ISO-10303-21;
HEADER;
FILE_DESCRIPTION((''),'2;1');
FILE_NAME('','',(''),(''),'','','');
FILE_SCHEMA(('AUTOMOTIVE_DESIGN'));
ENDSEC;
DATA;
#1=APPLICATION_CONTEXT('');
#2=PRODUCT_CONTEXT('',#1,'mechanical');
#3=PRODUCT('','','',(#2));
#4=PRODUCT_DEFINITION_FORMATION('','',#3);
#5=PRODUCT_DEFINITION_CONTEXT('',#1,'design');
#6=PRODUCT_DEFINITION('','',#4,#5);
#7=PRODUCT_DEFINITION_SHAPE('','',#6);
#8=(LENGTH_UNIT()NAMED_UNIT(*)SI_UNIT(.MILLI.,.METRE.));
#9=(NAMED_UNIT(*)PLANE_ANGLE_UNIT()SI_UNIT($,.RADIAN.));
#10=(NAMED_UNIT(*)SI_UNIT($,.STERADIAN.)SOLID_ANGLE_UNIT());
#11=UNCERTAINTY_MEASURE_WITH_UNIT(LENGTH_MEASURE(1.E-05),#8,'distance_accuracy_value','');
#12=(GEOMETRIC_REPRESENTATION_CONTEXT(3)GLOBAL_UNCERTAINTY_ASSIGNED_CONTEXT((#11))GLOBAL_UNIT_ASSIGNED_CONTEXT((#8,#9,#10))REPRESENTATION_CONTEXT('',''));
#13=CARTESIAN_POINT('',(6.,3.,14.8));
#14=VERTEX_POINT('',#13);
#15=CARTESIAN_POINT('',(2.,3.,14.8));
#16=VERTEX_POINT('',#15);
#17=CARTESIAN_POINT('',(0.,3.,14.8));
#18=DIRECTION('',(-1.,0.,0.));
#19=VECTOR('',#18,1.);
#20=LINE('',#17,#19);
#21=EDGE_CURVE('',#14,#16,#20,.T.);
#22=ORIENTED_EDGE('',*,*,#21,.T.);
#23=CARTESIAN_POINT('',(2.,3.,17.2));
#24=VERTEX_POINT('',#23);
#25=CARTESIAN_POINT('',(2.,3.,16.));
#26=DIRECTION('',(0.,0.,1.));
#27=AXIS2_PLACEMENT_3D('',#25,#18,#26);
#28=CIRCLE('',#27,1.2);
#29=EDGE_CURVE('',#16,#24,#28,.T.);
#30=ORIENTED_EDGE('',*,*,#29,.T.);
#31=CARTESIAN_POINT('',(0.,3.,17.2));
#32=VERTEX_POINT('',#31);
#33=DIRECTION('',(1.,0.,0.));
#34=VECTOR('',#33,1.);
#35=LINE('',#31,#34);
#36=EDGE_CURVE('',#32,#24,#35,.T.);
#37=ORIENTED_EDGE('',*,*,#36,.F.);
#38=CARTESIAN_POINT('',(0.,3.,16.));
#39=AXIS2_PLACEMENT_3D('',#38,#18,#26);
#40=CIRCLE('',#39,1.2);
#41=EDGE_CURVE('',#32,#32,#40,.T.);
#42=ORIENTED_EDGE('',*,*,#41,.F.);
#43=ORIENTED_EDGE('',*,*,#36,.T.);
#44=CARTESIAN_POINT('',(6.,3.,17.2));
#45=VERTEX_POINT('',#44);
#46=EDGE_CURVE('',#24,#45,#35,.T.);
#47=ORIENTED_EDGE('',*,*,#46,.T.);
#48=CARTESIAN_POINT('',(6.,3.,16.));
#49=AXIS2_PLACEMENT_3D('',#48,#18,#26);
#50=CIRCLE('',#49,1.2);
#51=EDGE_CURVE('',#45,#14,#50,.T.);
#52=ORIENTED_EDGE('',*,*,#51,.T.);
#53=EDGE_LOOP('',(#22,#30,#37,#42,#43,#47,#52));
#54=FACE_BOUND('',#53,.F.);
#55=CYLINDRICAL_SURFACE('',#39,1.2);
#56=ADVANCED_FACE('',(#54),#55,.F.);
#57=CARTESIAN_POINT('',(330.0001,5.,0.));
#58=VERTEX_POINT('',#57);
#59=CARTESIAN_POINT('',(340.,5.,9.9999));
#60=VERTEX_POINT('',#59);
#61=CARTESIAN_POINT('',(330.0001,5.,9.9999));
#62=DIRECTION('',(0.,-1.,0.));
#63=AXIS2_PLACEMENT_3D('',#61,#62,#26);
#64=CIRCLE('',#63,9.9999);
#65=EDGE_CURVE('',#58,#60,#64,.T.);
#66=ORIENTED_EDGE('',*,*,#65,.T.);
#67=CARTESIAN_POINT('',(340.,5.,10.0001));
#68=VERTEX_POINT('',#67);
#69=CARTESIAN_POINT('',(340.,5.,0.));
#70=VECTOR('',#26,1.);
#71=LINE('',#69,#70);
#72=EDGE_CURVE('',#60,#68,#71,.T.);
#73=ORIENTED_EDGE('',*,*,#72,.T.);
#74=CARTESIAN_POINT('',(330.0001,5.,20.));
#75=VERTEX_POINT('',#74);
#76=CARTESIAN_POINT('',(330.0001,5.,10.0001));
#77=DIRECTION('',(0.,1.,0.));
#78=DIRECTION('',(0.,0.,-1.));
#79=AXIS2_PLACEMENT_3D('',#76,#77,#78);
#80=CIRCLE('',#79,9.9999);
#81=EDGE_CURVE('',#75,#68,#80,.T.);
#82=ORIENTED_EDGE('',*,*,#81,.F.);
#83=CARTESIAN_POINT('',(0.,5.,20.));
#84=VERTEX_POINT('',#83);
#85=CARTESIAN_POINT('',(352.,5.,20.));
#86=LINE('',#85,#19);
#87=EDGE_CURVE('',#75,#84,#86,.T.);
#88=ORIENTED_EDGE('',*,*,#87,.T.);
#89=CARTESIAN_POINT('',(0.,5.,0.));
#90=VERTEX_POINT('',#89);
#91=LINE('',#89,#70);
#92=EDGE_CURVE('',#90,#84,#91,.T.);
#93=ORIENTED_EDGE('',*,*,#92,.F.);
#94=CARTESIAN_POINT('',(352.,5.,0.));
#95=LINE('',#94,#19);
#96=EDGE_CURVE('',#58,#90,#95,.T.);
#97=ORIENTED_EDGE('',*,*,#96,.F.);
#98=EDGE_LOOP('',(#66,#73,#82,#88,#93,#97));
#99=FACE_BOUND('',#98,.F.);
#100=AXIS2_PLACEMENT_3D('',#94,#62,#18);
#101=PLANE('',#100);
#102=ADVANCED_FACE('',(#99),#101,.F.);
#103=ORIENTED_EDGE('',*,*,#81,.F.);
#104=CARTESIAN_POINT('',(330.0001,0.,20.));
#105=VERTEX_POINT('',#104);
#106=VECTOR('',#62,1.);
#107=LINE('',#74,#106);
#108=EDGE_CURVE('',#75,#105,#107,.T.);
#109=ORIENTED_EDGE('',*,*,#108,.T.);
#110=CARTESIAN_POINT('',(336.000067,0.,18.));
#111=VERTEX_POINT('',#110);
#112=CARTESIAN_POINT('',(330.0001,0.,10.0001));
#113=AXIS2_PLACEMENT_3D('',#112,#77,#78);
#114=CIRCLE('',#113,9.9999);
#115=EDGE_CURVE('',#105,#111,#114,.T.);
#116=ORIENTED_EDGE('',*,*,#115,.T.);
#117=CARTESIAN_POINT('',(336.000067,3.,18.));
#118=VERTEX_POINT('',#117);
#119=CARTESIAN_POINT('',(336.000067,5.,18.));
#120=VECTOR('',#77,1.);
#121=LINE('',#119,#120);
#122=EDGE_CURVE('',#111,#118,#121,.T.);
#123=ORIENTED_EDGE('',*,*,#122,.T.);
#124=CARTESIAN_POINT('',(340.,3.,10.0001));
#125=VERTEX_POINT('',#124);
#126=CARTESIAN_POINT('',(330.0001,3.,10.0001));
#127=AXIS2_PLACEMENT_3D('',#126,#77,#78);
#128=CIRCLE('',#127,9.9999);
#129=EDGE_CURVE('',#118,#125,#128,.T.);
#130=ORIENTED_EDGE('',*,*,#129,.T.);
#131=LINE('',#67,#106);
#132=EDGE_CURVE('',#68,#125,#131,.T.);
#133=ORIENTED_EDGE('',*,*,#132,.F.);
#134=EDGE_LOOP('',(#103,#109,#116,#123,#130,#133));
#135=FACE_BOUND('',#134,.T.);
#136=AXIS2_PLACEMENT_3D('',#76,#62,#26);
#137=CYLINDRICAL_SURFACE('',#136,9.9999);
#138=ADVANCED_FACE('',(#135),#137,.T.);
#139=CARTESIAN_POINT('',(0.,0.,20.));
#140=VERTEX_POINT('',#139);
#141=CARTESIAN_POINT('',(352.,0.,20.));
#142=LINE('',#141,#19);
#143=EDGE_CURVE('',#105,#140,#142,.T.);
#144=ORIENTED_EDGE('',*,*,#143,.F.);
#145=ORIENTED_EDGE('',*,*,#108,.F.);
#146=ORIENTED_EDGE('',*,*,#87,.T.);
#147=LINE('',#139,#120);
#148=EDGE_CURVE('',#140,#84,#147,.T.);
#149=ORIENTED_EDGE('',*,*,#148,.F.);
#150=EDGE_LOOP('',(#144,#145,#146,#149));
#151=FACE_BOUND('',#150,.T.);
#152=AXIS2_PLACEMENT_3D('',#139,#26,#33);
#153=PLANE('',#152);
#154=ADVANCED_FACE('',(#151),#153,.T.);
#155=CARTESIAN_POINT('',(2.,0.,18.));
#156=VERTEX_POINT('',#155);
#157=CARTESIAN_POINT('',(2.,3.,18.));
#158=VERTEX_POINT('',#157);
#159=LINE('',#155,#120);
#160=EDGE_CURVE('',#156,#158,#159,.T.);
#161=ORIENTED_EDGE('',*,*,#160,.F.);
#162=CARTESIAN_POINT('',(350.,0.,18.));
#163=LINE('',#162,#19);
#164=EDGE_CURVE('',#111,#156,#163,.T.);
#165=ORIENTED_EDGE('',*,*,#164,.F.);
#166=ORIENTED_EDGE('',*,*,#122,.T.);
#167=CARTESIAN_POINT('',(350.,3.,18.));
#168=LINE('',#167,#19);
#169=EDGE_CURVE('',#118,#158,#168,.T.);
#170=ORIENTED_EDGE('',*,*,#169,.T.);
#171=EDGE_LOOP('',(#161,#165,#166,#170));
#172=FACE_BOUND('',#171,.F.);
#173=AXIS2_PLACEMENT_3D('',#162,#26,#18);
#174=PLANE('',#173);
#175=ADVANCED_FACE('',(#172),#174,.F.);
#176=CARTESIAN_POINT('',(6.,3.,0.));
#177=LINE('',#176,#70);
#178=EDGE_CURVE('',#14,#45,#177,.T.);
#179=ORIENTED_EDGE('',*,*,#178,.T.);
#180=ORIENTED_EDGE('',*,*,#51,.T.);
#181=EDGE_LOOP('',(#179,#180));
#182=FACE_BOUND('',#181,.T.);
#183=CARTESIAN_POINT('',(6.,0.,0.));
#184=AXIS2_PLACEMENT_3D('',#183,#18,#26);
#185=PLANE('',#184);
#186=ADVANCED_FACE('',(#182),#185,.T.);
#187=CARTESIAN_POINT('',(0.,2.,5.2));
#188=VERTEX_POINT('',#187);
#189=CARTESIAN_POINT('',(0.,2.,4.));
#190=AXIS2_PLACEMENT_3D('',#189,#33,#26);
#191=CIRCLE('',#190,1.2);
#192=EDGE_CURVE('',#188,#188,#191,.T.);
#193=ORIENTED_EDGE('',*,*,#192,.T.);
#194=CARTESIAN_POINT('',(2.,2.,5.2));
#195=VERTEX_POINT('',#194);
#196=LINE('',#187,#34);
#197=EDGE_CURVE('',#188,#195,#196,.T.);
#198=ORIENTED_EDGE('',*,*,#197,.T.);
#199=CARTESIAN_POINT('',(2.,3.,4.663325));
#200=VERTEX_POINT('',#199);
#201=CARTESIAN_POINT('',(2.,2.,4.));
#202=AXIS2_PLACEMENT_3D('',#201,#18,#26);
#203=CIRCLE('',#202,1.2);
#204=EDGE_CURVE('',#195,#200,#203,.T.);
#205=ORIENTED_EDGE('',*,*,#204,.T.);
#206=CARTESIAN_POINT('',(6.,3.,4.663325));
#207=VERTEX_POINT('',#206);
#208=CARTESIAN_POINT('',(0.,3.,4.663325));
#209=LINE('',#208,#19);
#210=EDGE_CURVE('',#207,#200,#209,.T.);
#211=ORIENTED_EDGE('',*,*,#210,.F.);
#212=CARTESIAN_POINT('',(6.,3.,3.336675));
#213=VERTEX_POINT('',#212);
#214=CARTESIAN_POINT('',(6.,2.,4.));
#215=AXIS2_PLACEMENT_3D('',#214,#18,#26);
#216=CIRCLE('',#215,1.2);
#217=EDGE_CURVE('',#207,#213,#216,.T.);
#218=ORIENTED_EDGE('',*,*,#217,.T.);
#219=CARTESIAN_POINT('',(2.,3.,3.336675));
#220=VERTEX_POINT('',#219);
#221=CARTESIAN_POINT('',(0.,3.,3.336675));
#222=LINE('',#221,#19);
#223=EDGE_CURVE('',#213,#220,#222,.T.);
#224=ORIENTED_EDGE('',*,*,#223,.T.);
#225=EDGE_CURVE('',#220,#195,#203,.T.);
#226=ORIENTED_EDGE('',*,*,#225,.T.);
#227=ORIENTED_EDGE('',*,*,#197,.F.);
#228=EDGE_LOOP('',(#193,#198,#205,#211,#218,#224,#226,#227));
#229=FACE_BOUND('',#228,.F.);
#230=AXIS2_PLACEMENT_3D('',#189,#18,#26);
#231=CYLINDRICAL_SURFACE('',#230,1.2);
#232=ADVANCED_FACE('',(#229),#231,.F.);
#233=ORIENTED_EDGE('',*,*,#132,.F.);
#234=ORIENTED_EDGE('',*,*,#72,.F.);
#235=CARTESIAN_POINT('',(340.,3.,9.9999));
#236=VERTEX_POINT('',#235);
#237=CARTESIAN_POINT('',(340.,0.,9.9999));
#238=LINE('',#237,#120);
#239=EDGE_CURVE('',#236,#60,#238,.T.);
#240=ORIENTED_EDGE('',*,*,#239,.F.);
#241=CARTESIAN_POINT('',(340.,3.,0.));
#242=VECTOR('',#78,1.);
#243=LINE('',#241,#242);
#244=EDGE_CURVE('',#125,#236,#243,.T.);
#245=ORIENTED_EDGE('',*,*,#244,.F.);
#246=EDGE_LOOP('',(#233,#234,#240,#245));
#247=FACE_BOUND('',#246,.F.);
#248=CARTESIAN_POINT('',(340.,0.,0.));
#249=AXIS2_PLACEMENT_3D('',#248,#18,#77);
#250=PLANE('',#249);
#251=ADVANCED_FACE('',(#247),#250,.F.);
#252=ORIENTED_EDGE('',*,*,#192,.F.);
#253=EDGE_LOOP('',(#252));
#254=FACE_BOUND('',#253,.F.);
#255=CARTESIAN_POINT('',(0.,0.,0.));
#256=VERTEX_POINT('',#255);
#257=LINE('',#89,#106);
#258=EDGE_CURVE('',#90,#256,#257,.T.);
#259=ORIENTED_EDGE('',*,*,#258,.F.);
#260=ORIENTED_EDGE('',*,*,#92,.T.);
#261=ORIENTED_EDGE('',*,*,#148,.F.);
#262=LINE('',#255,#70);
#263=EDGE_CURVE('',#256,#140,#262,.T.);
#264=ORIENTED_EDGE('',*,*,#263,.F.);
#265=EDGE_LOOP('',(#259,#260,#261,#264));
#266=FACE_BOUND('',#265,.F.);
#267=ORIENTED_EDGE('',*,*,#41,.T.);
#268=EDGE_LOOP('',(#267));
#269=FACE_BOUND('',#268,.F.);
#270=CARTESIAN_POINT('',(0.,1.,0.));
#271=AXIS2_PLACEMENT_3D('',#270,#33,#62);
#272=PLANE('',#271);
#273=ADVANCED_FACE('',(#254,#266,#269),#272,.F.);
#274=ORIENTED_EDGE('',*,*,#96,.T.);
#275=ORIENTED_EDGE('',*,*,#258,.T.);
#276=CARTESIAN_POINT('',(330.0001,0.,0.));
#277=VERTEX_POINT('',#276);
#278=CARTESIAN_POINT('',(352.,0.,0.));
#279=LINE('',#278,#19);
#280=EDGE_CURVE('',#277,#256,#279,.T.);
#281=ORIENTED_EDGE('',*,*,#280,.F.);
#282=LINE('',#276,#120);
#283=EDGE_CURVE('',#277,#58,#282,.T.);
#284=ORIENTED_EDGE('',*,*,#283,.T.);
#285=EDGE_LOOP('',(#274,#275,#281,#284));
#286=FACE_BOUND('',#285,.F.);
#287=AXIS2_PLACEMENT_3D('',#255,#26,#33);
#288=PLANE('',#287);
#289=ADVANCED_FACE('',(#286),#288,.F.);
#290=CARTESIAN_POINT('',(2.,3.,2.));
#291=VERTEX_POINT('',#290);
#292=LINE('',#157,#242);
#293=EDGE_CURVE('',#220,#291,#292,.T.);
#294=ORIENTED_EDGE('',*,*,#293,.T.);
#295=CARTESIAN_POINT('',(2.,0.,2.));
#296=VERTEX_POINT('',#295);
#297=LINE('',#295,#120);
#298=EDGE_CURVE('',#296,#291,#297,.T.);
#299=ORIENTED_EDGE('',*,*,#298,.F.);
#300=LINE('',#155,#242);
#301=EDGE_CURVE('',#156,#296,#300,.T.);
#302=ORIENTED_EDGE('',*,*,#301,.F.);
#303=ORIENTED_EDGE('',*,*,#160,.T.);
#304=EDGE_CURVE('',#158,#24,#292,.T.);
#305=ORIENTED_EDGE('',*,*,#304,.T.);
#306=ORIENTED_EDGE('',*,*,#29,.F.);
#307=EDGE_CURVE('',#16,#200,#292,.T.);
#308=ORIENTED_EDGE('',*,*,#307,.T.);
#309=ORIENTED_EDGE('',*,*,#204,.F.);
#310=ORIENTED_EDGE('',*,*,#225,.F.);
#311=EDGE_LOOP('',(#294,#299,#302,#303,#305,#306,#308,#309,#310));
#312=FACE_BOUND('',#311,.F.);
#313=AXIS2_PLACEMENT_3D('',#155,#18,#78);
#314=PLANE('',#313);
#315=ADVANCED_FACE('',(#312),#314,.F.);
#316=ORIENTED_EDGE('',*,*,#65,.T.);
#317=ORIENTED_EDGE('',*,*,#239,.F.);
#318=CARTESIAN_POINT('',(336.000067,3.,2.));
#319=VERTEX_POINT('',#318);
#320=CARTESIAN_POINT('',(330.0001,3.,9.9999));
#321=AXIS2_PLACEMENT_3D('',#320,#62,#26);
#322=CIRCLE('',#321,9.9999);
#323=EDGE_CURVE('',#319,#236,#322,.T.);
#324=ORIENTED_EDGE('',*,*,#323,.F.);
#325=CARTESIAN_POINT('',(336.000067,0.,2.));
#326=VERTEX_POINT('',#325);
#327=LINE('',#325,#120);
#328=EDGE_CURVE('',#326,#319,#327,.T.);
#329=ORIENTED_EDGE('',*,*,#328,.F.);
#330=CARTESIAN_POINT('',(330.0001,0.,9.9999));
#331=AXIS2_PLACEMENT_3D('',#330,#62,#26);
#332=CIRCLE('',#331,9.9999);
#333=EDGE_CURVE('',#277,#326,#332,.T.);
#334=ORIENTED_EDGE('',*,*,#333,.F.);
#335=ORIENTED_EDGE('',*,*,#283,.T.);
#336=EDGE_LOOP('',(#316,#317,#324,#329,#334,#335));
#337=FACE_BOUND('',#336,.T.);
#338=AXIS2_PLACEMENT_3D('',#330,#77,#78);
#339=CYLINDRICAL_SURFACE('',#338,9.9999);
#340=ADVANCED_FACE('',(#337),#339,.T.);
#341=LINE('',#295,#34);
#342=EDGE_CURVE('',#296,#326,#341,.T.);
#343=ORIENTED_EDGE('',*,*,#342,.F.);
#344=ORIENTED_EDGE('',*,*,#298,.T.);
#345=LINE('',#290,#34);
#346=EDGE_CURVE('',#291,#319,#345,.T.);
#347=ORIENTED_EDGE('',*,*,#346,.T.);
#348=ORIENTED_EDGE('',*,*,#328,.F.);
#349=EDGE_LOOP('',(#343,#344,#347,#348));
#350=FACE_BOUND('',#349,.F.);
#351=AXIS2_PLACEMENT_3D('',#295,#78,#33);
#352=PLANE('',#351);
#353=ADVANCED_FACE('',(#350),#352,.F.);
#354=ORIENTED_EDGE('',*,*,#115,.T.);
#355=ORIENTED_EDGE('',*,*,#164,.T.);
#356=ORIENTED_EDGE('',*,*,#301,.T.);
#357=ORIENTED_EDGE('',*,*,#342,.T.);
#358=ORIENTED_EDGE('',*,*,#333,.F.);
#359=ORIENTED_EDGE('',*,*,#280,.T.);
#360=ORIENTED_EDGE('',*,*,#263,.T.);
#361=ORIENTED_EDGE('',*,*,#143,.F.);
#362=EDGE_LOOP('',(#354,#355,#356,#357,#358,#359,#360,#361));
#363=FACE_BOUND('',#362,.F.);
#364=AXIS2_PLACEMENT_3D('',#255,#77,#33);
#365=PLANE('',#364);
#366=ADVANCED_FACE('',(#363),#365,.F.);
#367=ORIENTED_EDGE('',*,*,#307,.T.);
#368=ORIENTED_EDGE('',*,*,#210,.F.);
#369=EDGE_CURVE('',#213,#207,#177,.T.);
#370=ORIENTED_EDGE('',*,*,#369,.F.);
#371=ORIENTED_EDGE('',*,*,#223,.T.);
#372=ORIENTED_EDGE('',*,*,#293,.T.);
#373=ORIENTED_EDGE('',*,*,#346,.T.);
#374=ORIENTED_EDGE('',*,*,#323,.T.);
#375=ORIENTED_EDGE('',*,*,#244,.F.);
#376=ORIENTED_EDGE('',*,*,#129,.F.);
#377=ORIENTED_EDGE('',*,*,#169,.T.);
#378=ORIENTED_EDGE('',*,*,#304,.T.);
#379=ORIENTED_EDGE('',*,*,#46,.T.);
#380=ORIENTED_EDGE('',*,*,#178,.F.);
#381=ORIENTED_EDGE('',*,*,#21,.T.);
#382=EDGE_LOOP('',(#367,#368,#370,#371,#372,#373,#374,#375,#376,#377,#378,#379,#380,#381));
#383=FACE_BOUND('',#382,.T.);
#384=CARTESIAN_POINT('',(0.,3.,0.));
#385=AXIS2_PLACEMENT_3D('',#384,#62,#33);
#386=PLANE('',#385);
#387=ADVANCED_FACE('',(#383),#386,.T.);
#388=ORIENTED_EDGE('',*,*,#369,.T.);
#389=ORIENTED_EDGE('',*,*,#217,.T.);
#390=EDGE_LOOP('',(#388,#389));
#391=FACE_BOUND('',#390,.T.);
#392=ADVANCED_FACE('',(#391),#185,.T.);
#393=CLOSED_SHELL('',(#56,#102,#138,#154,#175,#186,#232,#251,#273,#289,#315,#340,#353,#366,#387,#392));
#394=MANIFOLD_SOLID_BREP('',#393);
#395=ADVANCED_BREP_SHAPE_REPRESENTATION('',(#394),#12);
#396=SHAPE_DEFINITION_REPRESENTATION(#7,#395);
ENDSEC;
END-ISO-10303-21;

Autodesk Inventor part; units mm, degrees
ref_plane "YZ Plane" through (0, 0, 0) normal (1, 0, 0) x (0, 1, 0)
ref_plane "XZ Plane" through (0, 0, 0) normal (0, 1, 0) x (-1, 0, 0)
ref_plane "XY Plane" through (0, 0, 0) normal (0, 0, 1) x (1, 0, 0)
sketch "スケッチ1" plane through (0, 0, 0) normal (0, 0, 1) x (1, 0, 0)
  line L0 (0, 0) -> (352, 0)
  line L1 (352, 0) -> (352, 5)
  line L2 (352, 5) -> (0, 5)
  line L3 (0, 5) -> (0, 0)
  line L4 (0, 0) -> (6, 0)
  line L5 (0, 1) -> (0, 0)
  dimension "d0" = 352
  dimension "d1" = 5
extrude "押し出し1" add sketch "スケッチ1" along normal blind 20
sketch "スケッチ3" plane through (0, 0, 0) normal (-1, 0, 0) x (0, 0, 1)
  line L0 (0, 5) -> (0, 0) projected
  line L1 (0, 0) -> (20, 0) projected
  line L2 (20, 5) -> (20, 0) projected
  line L3 (0, 5) -> (20, 5) projected
  circle A0 centre (4, 2) radius 1.2
  circle A1 centre (16, 3) radius 1.2
  dimension "d14" = 2.4
  dimension "d15" = 2.4
  dimension "d16" = 3
  dimension "d17" = 4
  dimension "d18" = 4
  dimension "d19" = 3
extrude "押し出し3" cut sketch "スケッチ3" against normal blind 6 contours A0 | A1
sketch "スケッチ4" plane through (0, 0, 0) normal (0, -1, 0) x (1, 0, 0)
  line L0 (0, 0) -> (352, 0) projected
  line L1 (352, 0) -> (352, 20) projected
  line L2 (0, 20) -> (352, 20) projected
  line L3 (0, 0) -> (0, 20) projected
  line L4 (2, 2) -> (350, 2)
  line L5 (350, 2) -> (350, 18)
  line L6 (350, 18) -> (2, 18)
  line L7 (2, 18) -> (2, 2)
  dimension "d22" = 2
  dimension "d23" = 2
  dimension "d24" = 2
  dimension "d25" = 2
extrude "押し出し4" cut sketch "スケッチ4" against normal blind 3 contours L7 L6 L5 L4
sketch "スケッチ5" plane through (0, 0, 0) normal (0, 0, -1) x (-1, 0, 0)
  line L0 (-352, 0) -> (-352, 5) projected
  line L1 (0, 0) -> (-352, 0) projected
  line L2 (-352, 5) -> (0, 5) projected
  line L3 (-352, 0) -> (-352, 5) projected
  line L4 (-352, 5) -> (0, 5) projected
  line L5 (-352, 0) -> (-340, 0)
  line L6 (-340, 0) -> (-340, 5)
  line L7 (-340, 5) -> (-352, 5)
  line L8 (-352, 5) -> (-352, 0)
  dimension "d28" = 12
extrude "押し出し5" cut sketch "スケッチ5" against normal through all
fillet "フィレット1" radius 10 2 edges at (340, 2.5, 0) (340, 2.5, 20)
properties part number "arm1_L"
